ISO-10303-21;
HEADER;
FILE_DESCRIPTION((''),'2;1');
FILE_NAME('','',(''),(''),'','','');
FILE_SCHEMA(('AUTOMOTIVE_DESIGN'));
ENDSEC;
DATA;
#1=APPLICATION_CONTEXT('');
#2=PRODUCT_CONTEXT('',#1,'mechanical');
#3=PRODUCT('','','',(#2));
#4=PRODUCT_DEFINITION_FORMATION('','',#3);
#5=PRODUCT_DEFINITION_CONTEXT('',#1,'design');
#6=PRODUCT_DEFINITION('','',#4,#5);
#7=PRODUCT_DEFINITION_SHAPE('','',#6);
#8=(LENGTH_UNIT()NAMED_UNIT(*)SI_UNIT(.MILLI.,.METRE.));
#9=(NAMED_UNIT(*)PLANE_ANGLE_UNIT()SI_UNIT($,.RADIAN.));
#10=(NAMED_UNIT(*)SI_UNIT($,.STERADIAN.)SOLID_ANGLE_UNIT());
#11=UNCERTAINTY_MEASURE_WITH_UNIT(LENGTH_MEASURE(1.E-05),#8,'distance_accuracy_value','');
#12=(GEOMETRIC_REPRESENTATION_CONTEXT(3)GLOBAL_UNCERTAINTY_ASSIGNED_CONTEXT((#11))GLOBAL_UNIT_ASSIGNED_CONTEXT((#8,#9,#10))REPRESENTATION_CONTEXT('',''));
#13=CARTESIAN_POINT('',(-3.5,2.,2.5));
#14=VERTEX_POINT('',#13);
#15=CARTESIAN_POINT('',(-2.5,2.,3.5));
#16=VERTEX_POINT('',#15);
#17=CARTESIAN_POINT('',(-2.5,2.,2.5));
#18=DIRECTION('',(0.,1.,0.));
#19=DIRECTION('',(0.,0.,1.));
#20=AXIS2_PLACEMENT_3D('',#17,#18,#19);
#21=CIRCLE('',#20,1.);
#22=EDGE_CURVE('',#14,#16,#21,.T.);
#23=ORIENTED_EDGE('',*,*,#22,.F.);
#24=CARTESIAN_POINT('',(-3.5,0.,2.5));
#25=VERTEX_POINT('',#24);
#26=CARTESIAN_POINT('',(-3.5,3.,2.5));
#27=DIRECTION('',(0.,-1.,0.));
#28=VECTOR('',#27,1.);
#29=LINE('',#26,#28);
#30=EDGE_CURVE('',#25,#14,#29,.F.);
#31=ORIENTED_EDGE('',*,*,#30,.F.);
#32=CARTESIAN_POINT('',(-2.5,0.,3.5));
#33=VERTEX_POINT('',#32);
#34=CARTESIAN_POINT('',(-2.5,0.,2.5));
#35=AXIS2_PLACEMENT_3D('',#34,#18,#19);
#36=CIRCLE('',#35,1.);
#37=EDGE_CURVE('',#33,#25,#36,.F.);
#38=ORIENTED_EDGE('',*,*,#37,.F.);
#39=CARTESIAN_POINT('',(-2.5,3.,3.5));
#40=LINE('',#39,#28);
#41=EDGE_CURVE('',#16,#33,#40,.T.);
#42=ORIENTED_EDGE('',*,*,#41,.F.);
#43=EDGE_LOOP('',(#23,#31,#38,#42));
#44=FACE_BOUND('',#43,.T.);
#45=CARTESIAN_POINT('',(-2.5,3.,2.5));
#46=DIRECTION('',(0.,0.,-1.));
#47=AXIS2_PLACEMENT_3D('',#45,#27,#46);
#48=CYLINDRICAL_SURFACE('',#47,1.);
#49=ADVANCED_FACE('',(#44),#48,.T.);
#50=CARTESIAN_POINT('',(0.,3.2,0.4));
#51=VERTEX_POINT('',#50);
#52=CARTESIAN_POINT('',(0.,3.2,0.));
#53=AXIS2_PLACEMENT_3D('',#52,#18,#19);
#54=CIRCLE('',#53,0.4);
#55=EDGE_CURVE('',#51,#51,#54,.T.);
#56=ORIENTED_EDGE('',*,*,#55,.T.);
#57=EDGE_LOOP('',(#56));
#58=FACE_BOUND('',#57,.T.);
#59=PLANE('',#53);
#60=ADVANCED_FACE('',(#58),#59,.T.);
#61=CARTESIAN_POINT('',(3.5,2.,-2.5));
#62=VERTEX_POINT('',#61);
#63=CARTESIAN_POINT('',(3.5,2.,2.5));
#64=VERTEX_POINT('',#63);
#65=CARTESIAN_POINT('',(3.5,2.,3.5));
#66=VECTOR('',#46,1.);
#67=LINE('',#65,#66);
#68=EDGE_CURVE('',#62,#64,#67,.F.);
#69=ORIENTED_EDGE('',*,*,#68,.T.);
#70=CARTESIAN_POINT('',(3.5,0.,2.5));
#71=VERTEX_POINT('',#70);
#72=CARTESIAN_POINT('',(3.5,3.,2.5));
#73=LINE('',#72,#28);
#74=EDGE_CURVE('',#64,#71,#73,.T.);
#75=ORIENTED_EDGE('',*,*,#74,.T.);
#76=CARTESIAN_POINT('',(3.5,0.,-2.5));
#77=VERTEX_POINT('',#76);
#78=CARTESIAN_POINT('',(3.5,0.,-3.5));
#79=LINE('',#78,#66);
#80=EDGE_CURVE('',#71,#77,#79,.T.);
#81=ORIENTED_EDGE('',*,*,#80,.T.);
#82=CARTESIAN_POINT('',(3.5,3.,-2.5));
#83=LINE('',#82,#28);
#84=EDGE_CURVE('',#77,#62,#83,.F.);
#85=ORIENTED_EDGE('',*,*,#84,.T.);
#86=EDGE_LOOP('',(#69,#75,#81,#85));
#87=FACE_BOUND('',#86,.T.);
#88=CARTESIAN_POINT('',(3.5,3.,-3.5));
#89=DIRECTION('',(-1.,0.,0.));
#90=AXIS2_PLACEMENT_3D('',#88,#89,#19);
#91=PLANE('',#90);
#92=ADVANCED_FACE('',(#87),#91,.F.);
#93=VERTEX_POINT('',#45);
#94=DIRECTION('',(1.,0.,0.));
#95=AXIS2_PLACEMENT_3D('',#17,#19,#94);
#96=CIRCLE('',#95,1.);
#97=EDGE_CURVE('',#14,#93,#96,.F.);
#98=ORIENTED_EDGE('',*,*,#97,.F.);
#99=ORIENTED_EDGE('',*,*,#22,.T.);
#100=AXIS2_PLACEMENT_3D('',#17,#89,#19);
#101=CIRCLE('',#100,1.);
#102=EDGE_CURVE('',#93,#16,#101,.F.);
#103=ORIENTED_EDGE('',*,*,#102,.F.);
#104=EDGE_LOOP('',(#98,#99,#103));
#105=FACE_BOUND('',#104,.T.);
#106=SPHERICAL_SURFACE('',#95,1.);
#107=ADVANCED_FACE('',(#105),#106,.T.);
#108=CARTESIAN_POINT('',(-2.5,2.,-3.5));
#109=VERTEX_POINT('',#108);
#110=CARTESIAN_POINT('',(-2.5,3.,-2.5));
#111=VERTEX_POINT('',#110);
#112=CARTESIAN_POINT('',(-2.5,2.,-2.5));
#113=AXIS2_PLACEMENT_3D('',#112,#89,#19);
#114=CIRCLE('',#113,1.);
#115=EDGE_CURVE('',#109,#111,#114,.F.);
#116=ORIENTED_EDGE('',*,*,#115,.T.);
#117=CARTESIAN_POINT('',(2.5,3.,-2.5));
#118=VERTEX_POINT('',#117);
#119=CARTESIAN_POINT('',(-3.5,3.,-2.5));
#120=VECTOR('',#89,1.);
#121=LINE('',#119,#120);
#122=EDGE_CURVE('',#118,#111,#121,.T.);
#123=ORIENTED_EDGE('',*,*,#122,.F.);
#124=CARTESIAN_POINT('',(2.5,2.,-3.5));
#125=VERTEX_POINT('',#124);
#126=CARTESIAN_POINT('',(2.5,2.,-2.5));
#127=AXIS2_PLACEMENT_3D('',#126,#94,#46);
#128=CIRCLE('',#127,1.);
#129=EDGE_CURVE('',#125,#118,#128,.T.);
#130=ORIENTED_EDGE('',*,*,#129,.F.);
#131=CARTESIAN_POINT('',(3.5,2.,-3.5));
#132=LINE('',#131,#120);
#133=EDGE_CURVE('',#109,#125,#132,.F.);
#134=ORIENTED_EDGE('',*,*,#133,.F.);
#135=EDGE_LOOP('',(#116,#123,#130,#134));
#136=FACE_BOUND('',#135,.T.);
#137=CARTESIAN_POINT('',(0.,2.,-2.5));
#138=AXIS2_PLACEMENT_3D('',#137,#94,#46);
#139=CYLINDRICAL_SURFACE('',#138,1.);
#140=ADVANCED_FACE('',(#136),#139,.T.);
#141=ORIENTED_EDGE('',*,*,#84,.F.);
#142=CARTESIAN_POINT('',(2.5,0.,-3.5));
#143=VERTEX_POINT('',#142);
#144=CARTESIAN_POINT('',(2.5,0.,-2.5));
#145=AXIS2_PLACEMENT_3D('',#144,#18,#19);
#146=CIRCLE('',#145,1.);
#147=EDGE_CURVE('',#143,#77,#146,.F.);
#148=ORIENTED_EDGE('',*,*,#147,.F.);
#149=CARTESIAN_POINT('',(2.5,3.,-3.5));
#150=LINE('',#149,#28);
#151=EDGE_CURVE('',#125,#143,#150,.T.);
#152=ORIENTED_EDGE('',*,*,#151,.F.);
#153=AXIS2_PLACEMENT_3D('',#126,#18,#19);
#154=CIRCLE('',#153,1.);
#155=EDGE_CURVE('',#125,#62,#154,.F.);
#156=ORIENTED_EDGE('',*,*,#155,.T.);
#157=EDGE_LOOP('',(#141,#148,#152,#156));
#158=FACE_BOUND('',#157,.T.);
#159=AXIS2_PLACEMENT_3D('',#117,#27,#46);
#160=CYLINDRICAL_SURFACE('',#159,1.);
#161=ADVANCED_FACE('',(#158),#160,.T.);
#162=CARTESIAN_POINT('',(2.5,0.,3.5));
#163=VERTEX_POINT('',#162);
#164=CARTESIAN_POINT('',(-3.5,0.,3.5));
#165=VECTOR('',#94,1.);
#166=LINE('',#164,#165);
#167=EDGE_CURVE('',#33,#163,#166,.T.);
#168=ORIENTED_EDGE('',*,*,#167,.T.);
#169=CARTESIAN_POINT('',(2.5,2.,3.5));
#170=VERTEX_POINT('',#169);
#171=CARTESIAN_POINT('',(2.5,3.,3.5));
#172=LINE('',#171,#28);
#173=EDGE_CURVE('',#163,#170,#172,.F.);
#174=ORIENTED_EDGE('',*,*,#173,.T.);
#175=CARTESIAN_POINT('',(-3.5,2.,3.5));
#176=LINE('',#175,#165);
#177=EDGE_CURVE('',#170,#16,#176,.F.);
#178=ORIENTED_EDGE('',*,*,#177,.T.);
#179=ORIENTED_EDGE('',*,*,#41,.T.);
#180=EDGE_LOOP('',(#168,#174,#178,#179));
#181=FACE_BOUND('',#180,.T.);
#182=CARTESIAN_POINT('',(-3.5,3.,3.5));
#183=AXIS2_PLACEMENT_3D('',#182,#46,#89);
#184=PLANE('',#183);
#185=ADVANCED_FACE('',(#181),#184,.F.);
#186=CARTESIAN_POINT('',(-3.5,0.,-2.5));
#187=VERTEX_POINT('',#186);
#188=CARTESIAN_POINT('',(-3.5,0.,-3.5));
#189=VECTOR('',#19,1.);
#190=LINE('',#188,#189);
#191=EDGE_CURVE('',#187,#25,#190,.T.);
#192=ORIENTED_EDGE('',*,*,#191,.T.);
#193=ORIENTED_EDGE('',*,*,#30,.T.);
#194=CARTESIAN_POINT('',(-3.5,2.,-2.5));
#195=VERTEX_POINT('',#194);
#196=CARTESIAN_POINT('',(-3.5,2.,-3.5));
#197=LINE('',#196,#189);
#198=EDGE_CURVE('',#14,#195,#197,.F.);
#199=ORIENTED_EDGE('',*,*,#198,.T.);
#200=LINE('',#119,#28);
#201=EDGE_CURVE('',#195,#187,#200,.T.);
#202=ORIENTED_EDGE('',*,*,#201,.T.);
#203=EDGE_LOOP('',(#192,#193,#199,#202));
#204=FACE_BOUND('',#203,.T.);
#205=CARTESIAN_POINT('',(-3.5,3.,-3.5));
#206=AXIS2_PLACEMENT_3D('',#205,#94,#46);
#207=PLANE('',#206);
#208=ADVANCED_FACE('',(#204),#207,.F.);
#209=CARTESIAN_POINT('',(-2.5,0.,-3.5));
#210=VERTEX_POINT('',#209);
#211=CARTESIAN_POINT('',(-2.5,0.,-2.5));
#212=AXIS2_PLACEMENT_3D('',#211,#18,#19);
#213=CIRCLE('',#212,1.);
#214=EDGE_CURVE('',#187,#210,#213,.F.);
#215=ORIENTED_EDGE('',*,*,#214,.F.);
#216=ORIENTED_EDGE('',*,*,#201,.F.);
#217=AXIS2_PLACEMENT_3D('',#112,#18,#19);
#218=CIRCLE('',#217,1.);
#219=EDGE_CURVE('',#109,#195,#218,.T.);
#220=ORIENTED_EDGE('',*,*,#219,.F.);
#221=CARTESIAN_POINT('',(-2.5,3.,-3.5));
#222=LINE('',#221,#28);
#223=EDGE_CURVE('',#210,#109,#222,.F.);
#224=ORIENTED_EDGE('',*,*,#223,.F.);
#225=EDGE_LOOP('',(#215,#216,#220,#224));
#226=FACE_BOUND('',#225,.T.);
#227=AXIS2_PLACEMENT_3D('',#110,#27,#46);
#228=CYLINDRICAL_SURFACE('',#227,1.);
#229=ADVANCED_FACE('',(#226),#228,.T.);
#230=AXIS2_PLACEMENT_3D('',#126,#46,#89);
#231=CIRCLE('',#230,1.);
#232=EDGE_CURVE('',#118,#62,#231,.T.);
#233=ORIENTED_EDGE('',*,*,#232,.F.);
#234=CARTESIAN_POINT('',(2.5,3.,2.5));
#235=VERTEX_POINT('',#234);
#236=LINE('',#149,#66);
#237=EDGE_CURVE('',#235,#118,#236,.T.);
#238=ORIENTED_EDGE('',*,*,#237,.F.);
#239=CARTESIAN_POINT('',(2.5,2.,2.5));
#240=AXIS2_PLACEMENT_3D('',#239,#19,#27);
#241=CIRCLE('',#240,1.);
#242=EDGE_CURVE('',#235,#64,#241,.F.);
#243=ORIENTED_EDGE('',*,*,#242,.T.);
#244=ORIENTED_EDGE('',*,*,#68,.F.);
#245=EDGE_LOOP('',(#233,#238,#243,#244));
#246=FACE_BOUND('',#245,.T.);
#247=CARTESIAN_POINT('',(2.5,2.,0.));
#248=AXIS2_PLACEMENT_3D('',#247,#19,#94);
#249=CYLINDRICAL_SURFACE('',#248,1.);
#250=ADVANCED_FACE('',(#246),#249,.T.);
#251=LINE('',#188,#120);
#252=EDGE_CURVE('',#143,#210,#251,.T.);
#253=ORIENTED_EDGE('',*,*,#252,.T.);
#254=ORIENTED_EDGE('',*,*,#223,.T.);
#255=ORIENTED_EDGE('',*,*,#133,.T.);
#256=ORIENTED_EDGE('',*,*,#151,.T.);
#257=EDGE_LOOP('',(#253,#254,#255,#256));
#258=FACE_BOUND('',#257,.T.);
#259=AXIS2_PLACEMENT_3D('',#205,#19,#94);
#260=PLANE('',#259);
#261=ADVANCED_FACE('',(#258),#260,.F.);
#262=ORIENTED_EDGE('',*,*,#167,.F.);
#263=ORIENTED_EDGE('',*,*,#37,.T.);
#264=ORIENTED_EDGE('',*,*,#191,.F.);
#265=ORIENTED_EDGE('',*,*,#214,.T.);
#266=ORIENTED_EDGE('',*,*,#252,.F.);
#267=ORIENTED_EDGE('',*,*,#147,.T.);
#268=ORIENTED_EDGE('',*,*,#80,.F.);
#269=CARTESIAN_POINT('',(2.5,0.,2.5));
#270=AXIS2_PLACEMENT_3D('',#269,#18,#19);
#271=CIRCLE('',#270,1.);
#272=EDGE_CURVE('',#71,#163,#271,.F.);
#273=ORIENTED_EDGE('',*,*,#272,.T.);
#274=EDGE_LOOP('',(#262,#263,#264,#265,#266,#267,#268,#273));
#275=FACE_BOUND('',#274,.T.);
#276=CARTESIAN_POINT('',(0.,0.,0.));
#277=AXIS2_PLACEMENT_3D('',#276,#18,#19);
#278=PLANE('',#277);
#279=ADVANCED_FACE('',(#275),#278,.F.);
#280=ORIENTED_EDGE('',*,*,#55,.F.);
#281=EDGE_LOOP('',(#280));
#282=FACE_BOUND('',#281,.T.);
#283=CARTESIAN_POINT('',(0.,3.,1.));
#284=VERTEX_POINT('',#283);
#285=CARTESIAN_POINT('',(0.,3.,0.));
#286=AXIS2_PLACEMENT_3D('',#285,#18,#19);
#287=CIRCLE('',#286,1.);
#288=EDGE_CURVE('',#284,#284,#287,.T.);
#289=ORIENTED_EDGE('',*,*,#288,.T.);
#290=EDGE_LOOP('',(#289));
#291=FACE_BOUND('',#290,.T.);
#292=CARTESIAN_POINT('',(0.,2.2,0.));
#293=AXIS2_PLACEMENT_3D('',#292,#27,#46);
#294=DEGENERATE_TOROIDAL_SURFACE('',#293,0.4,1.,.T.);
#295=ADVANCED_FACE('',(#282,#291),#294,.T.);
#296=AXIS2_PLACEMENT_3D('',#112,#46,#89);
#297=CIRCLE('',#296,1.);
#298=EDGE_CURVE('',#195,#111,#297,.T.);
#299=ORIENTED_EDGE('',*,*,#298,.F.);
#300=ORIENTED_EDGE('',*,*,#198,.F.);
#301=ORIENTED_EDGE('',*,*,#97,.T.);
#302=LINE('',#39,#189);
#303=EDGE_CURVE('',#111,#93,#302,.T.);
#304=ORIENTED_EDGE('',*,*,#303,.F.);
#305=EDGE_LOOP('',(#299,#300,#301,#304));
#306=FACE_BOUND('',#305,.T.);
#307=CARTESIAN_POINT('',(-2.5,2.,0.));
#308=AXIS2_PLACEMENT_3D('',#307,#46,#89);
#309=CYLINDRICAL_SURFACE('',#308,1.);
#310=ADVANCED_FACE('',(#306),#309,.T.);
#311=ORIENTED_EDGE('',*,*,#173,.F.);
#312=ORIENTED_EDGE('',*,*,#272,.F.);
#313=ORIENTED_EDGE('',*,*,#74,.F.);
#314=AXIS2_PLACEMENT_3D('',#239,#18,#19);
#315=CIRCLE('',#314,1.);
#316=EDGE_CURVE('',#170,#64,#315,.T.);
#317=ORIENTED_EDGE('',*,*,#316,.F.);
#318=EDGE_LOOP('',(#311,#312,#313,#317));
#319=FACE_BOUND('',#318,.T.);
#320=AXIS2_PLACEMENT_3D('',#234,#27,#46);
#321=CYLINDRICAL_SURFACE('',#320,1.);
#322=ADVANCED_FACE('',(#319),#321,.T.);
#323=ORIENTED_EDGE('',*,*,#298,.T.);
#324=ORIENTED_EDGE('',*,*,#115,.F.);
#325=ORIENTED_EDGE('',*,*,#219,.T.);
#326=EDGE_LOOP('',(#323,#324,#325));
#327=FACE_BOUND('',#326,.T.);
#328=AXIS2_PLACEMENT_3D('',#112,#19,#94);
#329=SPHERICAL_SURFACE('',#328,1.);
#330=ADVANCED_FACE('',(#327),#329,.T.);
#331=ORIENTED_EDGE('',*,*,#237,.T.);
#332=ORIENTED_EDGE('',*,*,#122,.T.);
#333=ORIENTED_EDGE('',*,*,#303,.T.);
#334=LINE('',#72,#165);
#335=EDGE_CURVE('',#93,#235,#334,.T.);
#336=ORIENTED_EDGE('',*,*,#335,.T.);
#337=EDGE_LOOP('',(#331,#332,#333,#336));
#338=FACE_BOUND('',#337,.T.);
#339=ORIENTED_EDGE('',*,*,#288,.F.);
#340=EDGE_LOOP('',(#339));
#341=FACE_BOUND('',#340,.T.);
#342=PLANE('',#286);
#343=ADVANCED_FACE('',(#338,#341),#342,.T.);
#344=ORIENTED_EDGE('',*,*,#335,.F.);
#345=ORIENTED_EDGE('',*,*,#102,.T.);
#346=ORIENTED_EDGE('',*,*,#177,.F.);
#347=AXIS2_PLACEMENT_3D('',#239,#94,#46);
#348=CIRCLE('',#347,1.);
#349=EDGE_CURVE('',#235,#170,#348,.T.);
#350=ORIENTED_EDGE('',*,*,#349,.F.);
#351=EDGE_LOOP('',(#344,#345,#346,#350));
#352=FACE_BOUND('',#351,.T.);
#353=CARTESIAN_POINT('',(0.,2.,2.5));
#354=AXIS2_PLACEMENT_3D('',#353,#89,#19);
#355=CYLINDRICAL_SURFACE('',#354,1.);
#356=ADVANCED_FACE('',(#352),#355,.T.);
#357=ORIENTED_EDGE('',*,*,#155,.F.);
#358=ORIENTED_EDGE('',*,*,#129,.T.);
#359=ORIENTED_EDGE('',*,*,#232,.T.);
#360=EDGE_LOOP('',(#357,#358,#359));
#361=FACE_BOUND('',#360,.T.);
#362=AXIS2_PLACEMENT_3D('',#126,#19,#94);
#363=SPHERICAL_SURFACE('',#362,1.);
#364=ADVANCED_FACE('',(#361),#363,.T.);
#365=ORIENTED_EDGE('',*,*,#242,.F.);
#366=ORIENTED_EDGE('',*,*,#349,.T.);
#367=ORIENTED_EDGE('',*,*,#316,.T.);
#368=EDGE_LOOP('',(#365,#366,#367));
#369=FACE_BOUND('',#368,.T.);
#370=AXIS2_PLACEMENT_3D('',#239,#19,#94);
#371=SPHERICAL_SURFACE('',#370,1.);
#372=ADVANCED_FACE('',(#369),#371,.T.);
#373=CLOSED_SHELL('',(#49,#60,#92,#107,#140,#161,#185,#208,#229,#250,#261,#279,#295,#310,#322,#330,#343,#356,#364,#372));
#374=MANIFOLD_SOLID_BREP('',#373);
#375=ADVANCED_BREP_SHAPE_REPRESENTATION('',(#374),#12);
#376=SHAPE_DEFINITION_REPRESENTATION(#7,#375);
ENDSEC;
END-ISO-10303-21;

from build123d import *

# Parameters (mm, degrees)
SKETCH1_W           = 7
SKETCH1_H           = 7
BOSS_EXTRUDE1_DEPTH = 3
FILLET1_R           = 1
SKETCH2_R           = 1
BOSS_EXTRUDE2_DEPTH = 0.2
FILLET2_R           = 1


with BuildPart() as part:
    # Sketch1 → Boss-Extrude1 (new body)
    with BuildSketch(Plane(origin=(0, 0, 0), x_dir=(1, 0, 0), z_dir=(0, 1, 0))):
        Rectangle(SKETCH1_W, SKETCH1_H)
    extrude(amount=BOSS_EXTRUDE1_DEPTH)

    # Fillet1
    fillet1_edges = [part.edges().sort_by_distance(p)[0] for p in [
        (-3.5, 3, 0),
        (0, 3, 3.5),
        (3.5, 3, 0),
        (0, 3, -3.5),
        (3.5, 1.5, 3.5),
        (-3.5, 1.5, 3.5),
        (-3.5, 1.5, -3.5),
        (3.5, 1.5, -3.5),
    ]]
    fillet(fillet1_edges, radius=FILLET1_R)

    # Sketch2 → Boss-Extrude2 (add)
    with BuildSketch(Plane(origin=(0, 3, 0), x_dir=(1, 0, 0), z_dir=(0, 1, 0))):
        with Locations(Location((0, 0, 0), (0, 0, 270))):
            Circle(SKETCH2_R)
    extrude(amount=BOSS_EXTRUDE2_DEPTH)

    # Fillet2
    # the kernel refuses this fillet: 1 mm, written as the material it takes off along each edge
    with BuildSketch(Plane(origin=(0, 3.2, 0), x_dir=(0, 0, 1), z_dir=(-1, 0, 0))) as fillet2_piece_1:
        with BuildLine():
            CenterArc((0.4, -1), FILLET2_R, 53.130102354, 36.869897646)
            Line((0.4, 0), (0.4, 0.02))
            Line((0.4, 0.02), (1, 0.02))
            Line((1, 0.02), (1.02, 0))
            ThreePointArc((1.02, 0), (1.02, -0.1), (1.012, -0.184))
            Line((1.012, -0.184), (1, -0.2))
        make_face()
    revolve(axis=Axis((0, 3.2, 0), (0, 1, 0)), mode=Mode.SUBTRACT)


solid = part.part
